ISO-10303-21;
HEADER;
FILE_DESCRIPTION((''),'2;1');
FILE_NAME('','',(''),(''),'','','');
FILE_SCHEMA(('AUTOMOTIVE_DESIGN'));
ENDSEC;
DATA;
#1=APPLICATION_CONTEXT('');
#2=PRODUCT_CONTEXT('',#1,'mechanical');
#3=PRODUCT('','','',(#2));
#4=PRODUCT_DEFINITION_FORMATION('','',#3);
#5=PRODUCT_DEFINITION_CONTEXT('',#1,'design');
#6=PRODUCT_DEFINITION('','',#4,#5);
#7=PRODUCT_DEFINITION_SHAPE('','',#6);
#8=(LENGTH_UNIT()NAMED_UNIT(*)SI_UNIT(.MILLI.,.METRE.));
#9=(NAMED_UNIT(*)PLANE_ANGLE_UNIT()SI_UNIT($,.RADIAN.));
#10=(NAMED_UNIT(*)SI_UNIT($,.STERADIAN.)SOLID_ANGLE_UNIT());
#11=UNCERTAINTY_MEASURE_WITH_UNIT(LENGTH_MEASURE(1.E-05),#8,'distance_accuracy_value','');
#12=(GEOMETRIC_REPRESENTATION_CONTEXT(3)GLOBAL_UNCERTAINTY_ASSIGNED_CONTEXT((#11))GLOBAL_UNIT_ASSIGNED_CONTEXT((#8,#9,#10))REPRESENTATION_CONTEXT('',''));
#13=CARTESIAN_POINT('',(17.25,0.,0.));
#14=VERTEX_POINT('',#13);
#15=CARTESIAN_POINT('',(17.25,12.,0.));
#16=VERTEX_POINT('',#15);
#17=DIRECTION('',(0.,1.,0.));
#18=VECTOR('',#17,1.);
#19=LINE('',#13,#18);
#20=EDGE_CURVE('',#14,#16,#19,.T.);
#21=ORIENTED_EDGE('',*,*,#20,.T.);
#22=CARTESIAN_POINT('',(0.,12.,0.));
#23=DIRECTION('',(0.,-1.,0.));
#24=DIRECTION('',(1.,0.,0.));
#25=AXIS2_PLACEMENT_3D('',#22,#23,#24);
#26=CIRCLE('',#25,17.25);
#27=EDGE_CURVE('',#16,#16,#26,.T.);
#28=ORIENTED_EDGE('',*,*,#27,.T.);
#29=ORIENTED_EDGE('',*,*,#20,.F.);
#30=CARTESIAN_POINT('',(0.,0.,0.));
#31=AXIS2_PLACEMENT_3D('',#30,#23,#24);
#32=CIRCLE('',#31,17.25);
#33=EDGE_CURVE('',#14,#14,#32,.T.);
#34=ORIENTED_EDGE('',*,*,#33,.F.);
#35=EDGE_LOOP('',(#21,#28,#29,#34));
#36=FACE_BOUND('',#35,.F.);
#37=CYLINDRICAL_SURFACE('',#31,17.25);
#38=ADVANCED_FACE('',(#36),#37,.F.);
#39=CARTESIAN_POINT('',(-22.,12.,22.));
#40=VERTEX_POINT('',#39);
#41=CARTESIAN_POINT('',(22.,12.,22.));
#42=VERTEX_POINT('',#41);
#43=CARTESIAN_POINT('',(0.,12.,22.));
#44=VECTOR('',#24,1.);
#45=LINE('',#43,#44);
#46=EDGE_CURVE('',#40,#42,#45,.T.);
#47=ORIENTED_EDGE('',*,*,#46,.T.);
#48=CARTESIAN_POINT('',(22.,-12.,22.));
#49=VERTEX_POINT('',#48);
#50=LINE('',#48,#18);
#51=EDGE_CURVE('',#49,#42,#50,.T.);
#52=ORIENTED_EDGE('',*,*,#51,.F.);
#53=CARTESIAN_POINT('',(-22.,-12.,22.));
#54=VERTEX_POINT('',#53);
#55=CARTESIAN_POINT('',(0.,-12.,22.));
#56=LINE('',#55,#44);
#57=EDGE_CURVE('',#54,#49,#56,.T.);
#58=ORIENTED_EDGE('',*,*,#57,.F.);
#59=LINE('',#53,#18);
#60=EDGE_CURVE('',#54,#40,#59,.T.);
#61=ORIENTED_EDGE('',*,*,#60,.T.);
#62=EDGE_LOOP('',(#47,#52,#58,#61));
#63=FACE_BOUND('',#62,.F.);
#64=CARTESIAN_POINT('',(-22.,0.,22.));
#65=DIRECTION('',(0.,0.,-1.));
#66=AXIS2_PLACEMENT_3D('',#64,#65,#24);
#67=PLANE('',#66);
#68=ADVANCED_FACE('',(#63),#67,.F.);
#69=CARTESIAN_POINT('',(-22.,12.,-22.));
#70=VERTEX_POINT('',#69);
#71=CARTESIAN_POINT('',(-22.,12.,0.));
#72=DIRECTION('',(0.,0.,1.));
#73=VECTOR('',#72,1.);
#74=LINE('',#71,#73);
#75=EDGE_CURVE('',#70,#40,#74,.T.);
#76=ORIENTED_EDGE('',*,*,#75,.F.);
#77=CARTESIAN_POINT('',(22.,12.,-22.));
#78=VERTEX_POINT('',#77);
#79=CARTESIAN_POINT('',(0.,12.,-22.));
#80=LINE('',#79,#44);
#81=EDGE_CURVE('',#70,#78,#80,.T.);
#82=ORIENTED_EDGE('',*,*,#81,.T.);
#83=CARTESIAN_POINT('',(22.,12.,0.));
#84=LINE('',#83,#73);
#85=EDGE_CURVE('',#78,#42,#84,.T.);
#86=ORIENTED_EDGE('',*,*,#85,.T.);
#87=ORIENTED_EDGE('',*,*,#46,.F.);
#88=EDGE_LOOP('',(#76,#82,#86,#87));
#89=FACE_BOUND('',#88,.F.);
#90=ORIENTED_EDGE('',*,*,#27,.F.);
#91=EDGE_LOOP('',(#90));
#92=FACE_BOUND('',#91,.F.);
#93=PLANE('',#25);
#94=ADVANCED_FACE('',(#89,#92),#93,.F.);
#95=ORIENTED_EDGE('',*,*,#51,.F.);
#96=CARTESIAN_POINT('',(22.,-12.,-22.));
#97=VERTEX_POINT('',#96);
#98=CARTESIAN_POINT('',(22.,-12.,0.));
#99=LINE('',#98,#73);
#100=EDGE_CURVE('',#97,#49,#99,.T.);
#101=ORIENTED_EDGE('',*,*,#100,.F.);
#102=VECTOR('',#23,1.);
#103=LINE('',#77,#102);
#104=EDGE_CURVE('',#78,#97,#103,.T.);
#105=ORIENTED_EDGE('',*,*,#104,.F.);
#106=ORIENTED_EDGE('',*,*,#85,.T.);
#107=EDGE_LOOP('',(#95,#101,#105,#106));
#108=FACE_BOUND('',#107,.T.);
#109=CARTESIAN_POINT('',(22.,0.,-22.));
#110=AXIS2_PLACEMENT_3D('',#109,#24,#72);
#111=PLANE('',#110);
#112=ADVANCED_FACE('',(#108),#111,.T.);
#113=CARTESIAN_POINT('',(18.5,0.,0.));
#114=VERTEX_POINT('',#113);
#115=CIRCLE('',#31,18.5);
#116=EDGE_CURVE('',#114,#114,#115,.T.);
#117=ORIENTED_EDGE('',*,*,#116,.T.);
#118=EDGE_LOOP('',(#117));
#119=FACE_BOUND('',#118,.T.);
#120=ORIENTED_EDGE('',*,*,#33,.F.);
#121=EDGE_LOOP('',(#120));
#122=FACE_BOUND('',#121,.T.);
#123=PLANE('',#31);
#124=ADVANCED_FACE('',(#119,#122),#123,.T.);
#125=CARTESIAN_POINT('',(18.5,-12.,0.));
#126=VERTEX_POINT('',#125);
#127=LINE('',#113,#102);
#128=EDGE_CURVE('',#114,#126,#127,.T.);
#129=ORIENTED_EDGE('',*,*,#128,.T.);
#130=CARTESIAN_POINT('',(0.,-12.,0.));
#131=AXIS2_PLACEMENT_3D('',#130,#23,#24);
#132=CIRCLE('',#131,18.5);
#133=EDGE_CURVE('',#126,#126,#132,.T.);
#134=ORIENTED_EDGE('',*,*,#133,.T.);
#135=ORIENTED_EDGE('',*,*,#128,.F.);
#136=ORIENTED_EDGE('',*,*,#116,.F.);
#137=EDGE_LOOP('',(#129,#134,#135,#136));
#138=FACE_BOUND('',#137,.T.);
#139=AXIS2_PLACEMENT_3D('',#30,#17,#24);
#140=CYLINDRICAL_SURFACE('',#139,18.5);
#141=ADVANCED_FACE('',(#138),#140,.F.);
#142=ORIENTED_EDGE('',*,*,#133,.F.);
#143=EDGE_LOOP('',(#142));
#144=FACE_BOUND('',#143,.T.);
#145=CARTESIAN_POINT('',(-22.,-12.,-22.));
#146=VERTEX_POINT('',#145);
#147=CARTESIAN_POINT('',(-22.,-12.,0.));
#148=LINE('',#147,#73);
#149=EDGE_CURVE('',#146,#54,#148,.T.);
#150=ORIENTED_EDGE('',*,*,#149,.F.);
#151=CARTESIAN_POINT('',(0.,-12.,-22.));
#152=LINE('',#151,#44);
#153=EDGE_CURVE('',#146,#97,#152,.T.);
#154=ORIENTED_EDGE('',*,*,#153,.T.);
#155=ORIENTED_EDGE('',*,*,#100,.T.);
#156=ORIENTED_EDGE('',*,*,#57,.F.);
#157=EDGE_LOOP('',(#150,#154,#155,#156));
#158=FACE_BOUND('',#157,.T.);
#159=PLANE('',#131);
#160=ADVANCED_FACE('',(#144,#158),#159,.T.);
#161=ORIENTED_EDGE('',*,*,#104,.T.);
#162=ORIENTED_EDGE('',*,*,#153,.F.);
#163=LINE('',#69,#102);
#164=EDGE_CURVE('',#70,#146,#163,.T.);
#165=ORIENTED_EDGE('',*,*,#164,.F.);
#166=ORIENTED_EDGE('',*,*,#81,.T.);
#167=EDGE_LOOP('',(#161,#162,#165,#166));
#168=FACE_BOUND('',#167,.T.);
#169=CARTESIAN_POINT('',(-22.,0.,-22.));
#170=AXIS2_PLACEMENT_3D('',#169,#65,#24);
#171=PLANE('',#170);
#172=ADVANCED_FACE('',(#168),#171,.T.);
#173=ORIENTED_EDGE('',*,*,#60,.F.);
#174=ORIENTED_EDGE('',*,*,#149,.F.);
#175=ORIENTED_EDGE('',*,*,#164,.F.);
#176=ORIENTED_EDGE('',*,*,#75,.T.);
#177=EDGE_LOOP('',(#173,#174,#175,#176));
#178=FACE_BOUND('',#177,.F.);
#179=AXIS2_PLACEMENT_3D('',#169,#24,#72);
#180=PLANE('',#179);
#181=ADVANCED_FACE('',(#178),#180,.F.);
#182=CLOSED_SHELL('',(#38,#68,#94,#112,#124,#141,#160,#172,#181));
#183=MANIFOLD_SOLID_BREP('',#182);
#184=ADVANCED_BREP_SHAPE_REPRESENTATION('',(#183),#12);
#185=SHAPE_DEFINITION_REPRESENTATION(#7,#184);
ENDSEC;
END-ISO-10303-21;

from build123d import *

# Parameters (mm, degrees)
F0_W     = 44
F0_H     = 44
F0_R     = 18.5
F1_DEPTH = 12
F2_W     = 44
F2_H     = 44
F2_R     = 17.25
F3_DEPTH = 12


# Not quite as in the source:
# - a feature names something its author has since deleted; it is built from what else it names


with BuildPart() as f1:
    # F0 (on Front) → F1 (new body)
    with BuildSketch(Plane.XZ):
        Rectangle(F0_W, F0_H)
        Circle(F0_R, mode=Mode.SUBTRACT)
    extrude(amount=F1_DEPTH)

    # F2 (on Front) → F3 (join)
    with BuildSketch(Plane.XZ):
        Rectangle(F2_W, F2_H)
        Circle(F2_R, mode=Mode.SUBTRACT)
    extrude(amount=-F3_DEPTH)


solid = f1.part
